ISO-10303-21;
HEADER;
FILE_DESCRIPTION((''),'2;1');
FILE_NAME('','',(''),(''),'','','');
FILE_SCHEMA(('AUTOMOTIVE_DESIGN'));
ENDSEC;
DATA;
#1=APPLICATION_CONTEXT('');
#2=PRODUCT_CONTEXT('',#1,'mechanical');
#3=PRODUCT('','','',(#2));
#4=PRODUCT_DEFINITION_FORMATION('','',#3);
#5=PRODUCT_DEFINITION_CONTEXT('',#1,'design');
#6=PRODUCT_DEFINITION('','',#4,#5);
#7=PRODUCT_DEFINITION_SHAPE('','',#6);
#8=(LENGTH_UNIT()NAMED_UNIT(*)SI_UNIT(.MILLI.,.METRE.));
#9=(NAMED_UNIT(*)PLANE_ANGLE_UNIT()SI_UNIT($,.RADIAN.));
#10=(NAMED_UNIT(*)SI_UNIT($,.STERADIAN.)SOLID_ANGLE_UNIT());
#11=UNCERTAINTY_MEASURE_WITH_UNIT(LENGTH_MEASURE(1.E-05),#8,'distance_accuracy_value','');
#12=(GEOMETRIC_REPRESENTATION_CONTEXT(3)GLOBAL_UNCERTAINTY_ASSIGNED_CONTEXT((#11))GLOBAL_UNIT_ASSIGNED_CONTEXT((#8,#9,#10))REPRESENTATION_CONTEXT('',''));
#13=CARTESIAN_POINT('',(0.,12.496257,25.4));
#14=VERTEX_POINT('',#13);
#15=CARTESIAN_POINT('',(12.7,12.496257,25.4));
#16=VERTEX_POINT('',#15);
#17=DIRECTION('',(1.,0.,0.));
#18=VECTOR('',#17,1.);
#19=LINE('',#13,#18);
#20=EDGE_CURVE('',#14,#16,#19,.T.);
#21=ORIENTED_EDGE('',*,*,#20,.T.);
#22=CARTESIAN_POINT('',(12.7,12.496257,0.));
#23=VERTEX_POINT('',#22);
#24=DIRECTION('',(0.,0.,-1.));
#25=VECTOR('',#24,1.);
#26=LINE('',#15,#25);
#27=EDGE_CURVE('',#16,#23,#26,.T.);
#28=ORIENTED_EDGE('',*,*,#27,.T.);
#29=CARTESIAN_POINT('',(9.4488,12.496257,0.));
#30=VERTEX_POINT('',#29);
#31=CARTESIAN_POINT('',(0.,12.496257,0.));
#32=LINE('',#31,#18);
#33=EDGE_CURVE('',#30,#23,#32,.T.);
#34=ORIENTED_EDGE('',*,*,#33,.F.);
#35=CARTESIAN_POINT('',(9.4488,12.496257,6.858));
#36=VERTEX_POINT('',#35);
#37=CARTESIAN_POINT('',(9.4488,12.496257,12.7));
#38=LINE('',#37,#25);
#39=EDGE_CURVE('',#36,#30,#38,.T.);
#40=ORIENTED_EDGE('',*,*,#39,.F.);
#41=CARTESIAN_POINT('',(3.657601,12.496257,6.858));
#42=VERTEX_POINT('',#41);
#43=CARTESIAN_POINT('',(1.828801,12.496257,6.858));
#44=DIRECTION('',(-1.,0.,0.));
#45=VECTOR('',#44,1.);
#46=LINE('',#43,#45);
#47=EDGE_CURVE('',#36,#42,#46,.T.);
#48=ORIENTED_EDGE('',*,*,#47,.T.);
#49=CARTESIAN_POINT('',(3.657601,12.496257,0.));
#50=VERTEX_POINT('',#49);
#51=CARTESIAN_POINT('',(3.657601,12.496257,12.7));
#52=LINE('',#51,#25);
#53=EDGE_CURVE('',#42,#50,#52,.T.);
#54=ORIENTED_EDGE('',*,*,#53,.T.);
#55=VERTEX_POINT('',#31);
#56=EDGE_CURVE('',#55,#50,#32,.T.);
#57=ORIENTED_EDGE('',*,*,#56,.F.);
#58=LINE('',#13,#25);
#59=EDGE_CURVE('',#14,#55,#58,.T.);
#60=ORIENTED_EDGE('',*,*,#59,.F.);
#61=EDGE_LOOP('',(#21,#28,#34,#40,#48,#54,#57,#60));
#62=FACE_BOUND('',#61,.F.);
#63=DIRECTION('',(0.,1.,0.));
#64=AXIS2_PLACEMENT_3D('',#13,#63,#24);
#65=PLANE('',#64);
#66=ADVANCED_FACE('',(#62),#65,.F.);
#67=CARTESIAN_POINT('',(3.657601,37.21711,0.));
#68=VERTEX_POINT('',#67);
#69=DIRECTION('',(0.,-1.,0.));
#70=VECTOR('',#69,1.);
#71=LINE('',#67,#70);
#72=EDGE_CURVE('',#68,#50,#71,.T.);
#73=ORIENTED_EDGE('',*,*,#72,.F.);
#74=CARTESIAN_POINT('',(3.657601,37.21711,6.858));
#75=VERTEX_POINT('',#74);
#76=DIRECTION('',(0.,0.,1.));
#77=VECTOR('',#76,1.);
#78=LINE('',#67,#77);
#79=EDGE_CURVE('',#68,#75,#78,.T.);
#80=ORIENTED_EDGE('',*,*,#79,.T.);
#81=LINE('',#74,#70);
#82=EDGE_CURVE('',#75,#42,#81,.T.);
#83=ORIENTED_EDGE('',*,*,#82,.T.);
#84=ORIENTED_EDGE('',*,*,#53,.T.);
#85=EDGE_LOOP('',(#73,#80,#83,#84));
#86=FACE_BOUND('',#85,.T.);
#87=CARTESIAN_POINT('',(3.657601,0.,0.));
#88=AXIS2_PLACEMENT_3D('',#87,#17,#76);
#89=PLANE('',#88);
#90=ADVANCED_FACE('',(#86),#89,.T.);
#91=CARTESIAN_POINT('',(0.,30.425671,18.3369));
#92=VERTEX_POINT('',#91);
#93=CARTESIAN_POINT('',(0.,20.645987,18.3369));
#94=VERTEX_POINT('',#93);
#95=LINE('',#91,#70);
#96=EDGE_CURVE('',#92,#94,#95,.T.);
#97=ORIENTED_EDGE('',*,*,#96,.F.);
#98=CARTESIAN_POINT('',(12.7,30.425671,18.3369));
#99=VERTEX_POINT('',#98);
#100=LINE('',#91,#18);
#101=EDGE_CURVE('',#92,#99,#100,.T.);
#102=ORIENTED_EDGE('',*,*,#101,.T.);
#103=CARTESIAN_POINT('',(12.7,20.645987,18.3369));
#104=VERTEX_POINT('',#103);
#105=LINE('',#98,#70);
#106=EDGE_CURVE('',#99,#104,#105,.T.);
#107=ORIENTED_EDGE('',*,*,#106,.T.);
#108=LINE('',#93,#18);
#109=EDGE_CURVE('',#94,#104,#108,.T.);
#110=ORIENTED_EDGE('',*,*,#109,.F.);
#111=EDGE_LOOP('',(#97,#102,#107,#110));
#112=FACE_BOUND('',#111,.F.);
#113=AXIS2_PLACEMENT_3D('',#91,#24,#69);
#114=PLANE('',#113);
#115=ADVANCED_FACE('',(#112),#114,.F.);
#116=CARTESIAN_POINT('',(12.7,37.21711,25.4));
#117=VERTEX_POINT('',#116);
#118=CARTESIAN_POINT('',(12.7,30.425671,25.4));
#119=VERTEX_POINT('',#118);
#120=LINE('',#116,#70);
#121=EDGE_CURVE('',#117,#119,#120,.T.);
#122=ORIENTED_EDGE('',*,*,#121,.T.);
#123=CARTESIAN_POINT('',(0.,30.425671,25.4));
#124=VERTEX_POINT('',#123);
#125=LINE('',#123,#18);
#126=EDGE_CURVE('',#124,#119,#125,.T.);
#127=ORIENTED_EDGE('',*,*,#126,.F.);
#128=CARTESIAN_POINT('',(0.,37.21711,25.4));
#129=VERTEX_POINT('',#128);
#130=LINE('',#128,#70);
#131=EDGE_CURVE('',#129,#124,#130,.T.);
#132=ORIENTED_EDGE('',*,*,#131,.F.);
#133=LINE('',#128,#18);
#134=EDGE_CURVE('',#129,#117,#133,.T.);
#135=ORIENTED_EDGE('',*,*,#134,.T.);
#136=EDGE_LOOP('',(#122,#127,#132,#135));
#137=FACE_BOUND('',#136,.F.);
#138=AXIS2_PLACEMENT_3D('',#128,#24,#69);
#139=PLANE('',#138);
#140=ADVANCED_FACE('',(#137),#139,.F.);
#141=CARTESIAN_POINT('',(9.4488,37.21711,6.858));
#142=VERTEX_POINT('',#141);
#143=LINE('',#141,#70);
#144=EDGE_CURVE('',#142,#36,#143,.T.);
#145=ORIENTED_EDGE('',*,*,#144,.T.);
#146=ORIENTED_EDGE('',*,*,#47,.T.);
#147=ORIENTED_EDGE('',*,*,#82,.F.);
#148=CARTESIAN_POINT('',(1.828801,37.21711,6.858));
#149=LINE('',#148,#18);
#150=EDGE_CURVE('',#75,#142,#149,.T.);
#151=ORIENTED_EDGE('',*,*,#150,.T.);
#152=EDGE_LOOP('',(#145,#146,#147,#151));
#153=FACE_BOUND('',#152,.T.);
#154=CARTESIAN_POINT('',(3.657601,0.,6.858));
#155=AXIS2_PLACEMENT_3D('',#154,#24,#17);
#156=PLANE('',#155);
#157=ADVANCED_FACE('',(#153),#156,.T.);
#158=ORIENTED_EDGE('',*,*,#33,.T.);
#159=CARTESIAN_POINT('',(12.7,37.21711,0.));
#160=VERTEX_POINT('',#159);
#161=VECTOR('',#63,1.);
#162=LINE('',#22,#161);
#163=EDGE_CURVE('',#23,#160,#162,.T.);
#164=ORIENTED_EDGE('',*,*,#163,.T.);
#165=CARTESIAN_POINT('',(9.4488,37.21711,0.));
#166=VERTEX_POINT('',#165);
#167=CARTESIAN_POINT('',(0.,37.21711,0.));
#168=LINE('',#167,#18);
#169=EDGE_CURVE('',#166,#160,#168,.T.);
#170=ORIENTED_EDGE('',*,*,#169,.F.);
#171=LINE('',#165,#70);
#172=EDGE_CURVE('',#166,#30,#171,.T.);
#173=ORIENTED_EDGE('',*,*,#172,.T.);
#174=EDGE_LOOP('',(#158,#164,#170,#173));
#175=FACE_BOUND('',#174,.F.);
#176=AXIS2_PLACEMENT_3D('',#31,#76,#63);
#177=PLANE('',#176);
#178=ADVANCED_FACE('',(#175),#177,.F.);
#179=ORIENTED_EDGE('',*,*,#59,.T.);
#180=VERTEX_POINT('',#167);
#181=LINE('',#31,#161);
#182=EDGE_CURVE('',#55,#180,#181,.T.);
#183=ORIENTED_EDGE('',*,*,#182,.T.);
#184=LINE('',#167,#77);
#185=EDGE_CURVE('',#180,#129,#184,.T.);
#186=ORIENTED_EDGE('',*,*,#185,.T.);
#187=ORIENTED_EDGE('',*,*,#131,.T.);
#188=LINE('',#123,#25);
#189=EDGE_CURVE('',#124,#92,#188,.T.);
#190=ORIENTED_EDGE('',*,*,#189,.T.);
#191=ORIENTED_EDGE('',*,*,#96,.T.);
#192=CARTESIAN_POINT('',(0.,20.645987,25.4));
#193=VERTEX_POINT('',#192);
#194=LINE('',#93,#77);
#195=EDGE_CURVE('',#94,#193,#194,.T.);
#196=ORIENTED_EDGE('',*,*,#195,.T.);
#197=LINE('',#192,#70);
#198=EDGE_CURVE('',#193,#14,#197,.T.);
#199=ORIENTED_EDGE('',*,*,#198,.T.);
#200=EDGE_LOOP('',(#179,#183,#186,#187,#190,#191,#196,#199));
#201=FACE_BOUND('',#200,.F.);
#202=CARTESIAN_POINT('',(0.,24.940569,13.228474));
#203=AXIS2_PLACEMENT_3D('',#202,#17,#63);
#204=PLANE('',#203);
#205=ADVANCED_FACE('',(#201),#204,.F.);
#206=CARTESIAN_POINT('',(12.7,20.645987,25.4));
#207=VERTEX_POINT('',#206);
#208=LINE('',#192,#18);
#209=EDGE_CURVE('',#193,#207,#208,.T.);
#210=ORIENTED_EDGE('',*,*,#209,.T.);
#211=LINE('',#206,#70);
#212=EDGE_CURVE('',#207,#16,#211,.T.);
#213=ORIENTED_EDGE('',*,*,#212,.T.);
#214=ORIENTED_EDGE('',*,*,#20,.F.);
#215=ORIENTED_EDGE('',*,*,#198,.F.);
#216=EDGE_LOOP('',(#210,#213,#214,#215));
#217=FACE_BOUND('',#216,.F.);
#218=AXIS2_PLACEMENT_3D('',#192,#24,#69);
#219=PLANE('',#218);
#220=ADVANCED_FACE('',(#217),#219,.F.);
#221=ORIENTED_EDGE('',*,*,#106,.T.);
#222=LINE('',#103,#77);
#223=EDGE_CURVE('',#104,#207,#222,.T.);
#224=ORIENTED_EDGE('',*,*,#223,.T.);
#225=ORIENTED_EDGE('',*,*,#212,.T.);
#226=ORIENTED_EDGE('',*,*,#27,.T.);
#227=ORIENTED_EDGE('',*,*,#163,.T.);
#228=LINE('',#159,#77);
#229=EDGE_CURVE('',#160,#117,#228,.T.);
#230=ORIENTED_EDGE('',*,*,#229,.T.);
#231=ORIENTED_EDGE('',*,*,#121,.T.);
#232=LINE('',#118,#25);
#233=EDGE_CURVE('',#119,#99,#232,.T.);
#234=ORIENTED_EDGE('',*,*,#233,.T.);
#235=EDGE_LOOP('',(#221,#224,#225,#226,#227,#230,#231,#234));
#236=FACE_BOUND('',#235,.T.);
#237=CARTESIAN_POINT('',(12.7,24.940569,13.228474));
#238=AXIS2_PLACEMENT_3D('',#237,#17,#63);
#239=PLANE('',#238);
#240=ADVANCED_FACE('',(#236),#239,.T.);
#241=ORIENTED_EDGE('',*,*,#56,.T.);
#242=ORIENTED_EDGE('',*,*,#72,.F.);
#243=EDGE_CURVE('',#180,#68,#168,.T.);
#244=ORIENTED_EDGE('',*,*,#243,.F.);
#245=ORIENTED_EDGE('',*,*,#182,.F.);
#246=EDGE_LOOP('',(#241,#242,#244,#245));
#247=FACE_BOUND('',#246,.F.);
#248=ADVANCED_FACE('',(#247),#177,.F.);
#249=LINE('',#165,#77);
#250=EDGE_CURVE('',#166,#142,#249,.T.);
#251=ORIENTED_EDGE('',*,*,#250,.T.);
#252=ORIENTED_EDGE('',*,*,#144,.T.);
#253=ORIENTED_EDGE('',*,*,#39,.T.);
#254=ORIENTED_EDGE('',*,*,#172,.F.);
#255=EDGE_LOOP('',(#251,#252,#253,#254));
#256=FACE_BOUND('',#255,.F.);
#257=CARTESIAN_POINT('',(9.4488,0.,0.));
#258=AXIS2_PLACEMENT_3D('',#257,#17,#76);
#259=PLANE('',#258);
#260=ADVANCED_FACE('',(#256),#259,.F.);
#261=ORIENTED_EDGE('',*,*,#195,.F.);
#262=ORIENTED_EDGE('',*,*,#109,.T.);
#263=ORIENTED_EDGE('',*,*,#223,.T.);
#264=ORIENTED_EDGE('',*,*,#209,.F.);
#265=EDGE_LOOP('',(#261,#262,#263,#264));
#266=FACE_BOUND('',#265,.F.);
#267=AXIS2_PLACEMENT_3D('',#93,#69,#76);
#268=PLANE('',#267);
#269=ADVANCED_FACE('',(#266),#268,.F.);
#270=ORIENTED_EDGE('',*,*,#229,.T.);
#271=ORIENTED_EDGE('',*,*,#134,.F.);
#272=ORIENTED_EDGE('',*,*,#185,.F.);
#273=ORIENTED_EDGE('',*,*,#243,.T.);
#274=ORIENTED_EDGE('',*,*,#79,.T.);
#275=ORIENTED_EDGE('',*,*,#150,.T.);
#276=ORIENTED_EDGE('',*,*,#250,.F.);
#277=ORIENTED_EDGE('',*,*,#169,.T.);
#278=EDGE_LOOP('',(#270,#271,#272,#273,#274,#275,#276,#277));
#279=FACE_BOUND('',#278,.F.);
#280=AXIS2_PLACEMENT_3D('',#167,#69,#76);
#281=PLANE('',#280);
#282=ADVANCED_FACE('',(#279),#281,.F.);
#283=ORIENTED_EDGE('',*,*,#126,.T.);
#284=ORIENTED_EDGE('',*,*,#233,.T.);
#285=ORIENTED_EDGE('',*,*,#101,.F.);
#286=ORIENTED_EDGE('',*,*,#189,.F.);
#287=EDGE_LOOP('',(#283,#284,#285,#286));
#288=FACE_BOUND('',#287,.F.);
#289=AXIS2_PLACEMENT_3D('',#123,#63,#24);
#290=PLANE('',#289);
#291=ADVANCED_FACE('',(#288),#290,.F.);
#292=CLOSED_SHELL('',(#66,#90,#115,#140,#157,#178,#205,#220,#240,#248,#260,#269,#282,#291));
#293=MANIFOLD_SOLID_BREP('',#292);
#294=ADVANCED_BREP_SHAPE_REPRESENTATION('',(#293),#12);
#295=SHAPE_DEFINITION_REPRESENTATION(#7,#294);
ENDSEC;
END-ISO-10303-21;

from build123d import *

# Parameters (mm, degrees)
F1_DEPTH = 12.7
F4_W     = 5.7911989279
F4_H     = 6.8580000661
F5_DEPTH = 12.7
F6_DEPTH = 25.4


# Not quite as in the source:
# - a feature of the source that left no trace in its solid (it failed there, or was rolled back) is left out


with BuildPart() as f1:
    # F0 (on Right) → F1 (new body)
    with BuildSketch(Plane.YZ):
        Polygon((12.4962570041, 25.4), (12.4962570041, 0), (37.2171103641, 0), (37.2171103641, 25.4), (30.4256705266, 25.4), (30.4256705266, 18.3368995143), (20.6459868013, 18.3368995143), (20.6459868013, 25.4), align=None)
    extrude(amount=F1_DEPTH)

    # F4 (on Front) → F5 (cut)
    with BuildSketch(Plane.XZ):
        with Locations((6.553200772, 3.4290000331)):
            Rectangle(F4_W, F4_H)
    extrude(amount=-F5_DEPTH, mode=Mode.SUBTRACT)

    # F6 (cut): a face of the model
    f6_faces = [f1.faces().sort_by_distance(p)[0] for p in [
        (6.553200772, 12.7, 3.4290000331),
    ]]
    extrude(f6_faces, amount=-F6_DEPTH, mode=Mode.SUBTRACT)


solid = f1.part
